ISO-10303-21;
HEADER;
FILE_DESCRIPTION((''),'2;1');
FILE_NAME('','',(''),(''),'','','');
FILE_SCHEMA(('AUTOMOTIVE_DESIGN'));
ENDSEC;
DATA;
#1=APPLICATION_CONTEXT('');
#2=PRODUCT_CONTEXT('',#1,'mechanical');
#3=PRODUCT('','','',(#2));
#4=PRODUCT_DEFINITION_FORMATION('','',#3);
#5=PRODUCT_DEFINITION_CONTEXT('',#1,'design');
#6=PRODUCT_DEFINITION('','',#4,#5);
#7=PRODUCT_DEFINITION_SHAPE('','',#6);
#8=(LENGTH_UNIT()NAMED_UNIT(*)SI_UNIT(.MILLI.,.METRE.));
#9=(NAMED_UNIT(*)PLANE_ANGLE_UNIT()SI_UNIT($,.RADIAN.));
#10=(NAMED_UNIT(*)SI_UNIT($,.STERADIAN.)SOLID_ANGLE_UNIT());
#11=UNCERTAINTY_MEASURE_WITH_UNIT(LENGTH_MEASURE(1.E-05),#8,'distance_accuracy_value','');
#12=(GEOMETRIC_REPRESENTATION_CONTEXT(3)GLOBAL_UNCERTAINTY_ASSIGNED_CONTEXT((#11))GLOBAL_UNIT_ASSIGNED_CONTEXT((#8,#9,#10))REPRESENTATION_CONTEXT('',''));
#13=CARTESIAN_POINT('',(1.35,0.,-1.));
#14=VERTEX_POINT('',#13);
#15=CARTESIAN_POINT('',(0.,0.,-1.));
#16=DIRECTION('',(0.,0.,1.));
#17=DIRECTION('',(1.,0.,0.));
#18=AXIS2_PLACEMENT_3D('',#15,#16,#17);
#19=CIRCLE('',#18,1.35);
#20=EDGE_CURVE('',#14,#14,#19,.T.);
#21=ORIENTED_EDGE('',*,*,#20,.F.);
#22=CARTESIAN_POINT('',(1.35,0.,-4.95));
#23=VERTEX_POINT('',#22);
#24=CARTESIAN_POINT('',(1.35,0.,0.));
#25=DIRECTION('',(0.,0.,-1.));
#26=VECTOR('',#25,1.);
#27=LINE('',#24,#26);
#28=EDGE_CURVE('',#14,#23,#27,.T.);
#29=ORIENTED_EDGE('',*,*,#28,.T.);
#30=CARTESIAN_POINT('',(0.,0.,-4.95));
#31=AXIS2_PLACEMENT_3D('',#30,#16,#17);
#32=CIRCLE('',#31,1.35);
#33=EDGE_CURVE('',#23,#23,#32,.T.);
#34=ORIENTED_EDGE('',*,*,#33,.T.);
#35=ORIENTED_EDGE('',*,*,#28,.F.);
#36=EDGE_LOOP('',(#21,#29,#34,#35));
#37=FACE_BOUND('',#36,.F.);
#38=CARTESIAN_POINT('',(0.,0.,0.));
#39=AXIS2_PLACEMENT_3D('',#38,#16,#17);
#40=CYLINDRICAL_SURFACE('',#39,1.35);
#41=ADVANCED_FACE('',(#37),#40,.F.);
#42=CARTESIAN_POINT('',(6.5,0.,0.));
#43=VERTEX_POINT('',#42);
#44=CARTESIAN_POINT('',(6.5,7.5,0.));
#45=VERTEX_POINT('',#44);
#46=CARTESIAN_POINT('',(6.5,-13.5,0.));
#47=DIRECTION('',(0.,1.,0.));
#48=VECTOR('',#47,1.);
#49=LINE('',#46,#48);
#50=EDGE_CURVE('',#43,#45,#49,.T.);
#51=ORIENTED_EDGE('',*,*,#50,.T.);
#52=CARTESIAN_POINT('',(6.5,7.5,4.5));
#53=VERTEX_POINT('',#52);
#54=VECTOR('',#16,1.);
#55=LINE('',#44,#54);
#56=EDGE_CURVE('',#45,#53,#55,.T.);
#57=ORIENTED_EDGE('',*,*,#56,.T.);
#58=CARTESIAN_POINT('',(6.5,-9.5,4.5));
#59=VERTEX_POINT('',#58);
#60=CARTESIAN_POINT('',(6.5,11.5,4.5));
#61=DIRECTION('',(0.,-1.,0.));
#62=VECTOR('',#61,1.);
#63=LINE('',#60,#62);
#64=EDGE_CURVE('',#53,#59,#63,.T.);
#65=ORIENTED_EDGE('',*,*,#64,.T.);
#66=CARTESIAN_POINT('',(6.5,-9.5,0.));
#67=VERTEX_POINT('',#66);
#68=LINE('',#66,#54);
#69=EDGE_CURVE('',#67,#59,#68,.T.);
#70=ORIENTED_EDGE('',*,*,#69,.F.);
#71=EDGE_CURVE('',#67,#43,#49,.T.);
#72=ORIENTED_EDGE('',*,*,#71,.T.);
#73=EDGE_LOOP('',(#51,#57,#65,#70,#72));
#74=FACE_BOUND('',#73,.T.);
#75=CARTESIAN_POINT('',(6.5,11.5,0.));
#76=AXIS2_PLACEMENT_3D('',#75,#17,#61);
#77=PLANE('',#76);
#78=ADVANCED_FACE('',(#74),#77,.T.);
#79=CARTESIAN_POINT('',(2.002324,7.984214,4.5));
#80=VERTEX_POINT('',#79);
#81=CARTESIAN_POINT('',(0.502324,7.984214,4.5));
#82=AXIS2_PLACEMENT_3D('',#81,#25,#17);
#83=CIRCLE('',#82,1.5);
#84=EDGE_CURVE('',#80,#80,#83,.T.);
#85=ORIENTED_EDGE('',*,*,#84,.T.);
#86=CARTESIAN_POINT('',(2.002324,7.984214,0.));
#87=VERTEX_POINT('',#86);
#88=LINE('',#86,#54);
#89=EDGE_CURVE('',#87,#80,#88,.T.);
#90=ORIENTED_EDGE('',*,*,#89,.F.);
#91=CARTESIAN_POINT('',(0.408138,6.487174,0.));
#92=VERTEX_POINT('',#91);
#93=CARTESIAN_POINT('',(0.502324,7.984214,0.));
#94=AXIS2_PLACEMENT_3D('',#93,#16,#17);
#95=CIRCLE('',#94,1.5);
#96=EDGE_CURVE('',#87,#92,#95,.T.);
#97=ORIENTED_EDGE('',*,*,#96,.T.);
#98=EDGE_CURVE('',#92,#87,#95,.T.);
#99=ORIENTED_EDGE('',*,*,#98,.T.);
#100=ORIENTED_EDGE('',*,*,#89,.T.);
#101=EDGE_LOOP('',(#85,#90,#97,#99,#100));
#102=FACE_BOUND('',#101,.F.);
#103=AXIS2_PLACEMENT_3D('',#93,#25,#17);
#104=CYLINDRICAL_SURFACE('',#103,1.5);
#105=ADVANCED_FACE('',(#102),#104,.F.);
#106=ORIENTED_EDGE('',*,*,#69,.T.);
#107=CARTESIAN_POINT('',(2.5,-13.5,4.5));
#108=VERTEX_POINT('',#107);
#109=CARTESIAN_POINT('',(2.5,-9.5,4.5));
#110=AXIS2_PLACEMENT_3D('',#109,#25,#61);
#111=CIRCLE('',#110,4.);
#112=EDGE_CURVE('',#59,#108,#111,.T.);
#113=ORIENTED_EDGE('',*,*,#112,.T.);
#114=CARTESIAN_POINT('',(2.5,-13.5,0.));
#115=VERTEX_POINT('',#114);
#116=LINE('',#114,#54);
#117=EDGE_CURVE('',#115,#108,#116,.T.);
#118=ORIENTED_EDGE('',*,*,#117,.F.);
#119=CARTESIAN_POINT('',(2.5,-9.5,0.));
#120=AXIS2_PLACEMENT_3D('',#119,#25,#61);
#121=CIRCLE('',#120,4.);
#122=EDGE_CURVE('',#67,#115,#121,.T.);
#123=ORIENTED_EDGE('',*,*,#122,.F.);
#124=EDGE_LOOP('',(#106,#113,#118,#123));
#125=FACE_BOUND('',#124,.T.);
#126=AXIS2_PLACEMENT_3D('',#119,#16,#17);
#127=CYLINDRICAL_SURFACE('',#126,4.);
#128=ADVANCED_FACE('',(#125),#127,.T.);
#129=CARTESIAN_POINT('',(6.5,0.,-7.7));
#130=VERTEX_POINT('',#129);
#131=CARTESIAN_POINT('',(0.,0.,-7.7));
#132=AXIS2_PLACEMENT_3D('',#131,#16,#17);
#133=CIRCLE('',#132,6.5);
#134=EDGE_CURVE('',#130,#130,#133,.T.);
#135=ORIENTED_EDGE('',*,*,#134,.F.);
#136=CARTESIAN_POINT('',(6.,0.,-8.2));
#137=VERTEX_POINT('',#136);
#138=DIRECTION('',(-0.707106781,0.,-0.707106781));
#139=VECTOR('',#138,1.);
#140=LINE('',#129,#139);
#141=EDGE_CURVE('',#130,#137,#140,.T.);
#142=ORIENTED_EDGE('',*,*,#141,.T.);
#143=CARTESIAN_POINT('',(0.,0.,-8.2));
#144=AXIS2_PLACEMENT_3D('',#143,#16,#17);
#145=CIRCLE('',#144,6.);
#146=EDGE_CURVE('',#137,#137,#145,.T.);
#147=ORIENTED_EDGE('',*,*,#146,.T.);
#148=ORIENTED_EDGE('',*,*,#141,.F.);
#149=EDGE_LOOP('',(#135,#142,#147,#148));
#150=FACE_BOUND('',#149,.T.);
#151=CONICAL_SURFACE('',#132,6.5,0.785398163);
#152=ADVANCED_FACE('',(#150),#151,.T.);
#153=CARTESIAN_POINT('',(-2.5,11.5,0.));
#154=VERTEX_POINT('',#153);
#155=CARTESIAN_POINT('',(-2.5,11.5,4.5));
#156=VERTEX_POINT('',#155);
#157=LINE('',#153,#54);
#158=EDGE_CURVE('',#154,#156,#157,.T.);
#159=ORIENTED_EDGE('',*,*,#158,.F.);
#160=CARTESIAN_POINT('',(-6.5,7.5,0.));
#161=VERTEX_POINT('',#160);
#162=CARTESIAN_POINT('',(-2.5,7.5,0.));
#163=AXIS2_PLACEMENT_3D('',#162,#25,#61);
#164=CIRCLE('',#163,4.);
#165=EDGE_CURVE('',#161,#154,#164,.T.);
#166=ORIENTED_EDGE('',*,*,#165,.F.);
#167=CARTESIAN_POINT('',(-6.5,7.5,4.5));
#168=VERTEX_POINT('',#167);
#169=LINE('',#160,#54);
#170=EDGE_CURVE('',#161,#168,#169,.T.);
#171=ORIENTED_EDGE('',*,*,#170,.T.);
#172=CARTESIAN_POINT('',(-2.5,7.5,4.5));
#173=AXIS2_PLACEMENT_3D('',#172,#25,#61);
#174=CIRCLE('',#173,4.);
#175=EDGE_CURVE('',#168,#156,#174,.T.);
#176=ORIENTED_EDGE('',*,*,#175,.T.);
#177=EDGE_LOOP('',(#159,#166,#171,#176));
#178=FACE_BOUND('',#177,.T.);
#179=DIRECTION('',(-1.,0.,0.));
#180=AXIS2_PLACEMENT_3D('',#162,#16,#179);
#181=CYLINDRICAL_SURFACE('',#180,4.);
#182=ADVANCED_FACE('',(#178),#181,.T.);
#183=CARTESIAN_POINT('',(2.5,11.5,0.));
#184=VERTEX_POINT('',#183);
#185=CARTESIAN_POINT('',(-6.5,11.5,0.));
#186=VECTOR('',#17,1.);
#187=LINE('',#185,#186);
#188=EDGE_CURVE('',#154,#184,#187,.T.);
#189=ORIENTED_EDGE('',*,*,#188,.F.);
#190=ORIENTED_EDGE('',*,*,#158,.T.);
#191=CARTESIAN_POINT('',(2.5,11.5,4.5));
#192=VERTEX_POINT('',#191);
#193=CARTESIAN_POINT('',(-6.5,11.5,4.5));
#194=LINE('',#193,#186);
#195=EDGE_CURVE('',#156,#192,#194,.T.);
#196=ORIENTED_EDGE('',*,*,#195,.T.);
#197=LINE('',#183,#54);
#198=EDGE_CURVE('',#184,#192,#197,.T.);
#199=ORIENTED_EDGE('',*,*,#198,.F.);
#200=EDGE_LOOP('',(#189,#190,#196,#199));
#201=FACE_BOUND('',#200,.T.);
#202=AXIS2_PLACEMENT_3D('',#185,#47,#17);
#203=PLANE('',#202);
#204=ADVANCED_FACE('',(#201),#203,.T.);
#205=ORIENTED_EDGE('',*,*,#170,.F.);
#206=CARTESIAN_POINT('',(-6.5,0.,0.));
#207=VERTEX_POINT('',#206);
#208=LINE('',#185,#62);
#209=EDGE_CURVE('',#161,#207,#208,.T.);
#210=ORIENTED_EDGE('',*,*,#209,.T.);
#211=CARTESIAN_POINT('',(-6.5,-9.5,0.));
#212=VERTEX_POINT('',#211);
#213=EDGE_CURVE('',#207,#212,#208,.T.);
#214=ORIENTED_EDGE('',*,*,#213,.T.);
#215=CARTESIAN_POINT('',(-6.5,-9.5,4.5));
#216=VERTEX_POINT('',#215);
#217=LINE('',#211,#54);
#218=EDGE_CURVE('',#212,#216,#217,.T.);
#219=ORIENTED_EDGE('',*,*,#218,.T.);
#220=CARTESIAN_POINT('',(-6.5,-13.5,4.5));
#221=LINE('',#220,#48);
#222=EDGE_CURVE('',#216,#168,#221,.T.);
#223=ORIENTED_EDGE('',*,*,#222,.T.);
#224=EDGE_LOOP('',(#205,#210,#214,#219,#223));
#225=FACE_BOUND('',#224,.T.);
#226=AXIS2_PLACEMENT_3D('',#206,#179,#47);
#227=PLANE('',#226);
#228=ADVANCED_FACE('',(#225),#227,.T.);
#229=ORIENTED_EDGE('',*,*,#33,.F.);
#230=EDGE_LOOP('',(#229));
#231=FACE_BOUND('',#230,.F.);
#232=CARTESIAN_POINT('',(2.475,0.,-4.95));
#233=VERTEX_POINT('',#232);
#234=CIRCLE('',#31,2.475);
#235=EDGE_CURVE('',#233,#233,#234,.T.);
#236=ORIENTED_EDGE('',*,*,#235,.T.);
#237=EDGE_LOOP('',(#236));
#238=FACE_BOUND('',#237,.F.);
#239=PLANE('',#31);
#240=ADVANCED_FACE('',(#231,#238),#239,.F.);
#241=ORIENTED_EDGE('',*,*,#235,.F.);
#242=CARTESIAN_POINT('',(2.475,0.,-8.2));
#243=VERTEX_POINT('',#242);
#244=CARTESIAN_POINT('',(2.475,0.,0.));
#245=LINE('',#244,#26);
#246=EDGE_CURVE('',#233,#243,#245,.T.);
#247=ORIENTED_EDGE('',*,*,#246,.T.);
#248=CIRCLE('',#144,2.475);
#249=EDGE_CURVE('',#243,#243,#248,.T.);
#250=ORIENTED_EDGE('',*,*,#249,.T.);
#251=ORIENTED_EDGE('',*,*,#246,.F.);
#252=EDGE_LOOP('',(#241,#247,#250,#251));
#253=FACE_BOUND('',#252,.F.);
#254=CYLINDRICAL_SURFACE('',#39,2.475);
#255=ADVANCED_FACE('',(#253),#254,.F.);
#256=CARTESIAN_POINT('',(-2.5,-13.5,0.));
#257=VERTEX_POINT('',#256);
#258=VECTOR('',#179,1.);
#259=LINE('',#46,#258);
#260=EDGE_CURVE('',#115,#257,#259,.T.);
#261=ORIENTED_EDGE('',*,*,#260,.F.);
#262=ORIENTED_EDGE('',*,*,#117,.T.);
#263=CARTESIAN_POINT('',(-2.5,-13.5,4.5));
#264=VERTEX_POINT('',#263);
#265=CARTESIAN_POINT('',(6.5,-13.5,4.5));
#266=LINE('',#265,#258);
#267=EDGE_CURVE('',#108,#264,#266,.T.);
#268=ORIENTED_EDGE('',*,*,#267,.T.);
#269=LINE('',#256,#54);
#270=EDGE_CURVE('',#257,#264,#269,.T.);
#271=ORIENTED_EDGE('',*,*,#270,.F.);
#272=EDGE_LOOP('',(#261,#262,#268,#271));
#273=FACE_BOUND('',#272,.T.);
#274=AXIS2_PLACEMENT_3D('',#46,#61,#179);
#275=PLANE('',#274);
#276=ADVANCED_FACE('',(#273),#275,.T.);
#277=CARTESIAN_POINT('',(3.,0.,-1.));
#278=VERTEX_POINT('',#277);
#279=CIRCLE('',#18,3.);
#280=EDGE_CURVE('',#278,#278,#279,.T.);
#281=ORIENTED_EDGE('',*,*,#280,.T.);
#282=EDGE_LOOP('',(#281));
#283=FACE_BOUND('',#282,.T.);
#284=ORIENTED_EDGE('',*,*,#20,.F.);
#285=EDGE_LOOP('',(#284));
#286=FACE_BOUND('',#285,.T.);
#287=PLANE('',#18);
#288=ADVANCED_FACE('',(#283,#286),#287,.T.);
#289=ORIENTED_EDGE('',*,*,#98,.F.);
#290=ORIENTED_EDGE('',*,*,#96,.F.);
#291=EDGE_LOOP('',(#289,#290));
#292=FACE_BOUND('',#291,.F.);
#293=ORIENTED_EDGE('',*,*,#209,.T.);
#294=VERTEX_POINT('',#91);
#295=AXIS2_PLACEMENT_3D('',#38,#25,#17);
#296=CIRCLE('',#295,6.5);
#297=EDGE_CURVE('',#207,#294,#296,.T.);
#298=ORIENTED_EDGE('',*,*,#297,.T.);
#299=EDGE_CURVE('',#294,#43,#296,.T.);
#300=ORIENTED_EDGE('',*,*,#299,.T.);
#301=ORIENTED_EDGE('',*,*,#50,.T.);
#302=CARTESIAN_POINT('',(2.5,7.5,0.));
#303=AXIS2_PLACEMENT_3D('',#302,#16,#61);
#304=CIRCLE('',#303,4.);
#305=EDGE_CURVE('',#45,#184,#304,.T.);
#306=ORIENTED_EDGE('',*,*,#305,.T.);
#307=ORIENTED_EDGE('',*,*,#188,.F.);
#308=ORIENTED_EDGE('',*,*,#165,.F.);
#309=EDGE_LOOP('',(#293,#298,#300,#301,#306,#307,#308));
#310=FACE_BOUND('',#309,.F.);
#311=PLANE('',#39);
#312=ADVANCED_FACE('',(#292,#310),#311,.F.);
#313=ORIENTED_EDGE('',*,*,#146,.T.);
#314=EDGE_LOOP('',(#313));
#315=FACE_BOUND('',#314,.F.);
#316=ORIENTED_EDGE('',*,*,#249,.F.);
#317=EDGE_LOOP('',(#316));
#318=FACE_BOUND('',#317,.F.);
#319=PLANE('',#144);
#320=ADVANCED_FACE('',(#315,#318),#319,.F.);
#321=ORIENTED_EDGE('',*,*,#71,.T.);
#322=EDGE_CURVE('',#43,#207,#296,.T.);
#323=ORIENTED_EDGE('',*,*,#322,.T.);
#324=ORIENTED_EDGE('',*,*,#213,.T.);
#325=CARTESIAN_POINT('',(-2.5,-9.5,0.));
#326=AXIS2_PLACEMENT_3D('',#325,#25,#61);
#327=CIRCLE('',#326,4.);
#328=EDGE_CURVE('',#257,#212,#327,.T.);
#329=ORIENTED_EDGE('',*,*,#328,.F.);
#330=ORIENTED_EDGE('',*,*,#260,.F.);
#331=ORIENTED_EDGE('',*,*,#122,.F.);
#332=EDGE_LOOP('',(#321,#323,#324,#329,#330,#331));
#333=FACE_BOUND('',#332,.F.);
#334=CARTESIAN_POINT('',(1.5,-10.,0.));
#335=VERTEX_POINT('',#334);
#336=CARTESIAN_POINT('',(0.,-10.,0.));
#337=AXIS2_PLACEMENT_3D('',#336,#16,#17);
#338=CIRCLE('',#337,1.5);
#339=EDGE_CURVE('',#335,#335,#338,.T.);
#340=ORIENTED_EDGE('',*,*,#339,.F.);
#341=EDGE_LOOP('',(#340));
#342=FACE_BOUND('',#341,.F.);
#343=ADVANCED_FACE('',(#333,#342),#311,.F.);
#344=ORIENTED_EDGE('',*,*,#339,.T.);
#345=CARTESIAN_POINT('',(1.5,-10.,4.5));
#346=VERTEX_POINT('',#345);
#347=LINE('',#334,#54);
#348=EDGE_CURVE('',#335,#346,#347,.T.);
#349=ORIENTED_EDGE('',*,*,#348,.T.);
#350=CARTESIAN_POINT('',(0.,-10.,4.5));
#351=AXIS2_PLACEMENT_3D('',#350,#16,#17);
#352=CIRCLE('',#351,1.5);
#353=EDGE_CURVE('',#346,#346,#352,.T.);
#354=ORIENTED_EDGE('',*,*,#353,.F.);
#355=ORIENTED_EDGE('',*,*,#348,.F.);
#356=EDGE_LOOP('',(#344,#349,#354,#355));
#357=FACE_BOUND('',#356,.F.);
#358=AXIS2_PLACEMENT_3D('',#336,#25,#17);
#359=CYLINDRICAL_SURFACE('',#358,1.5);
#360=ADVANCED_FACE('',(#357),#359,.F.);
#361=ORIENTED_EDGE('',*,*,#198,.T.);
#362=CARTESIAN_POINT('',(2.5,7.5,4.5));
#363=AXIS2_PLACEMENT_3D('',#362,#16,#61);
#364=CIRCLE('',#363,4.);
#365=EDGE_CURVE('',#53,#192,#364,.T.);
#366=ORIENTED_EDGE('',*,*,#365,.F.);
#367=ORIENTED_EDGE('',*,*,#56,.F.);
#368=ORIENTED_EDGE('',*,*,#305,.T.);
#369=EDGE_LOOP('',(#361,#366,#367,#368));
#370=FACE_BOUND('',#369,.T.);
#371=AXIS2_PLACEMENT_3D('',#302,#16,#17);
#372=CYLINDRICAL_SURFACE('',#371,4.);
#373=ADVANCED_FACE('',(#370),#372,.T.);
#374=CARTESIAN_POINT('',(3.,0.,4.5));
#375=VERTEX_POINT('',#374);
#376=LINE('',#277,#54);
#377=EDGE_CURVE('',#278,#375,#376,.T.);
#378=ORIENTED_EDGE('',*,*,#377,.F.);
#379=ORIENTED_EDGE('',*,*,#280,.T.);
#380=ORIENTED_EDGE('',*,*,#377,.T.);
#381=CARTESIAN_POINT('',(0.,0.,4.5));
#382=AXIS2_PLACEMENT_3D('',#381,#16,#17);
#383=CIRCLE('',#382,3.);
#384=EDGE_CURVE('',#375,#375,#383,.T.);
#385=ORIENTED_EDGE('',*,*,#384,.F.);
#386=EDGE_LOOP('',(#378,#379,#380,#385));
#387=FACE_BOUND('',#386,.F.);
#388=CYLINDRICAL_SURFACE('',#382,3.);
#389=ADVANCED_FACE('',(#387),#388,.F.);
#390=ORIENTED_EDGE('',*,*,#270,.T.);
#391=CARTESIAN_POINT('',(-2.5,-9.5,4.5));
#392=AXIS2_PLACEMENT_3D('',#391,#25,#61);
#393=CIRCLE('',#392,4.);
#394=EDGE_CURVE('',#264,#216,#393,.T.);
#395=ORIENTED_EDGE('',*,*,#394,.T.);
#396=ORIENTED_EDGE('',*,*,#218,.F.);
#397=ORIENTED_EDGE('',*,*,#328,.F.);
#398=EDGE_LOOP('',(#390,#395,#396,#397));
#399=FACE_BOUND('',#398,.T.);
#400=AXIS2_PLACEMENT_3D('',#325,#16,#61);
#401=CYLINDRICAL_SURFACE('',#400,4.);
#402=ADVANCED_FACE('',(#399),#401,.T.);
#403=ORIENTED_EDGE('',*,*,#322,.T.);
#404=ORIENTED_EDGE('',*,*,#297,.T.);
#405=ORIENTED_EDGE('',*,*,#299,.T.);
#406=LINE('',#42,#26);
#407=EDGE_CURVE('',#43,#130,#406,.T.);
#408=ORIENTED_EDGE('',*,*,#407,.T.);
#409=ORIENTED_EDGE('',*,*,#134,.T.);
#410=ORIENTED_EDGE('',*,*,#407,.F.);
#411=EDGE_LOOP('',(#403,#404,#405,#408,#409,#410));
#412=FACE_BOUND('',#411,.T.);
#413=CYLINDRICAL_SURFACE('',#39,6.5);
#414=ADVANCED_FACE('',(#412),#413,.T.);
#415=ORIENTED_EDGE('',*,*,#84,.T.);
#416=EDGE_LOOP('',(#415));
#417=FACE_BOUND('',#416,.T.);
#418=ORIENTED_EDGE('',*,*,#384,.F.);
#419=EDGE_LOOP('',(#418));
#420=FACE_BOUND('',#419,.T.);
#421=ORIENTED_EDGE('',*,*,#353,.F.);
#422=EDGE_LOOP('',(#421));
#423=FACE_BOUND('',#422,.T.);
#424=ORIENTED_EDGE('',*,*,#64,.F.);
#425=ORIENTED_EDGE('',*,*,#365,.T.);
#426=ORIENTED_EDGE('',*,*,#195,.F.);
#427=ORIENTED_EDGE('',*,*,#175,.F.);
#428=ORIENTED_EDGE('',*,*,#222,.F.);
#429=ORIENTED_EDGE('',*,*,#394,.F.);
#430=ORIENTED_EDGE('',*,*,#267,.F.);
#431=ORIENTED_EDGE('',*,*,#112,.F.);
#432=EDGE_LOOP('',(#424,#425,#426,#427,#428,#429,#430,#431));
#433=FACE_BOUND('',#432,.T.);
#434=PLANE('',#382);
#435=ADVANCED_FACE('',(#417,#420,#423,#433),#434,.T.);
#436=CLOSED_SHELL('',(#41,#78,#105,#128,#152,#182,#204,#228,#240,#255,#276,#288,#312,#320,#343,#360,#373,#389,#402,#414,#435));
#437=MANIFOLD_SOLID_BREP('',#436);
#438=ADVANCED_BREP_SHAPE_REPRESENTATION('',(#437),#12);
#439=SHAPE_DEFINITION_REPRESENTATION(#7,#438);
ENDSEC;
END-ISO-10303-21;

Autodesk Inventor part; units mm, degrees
ref_plane "YZ Plane" through (0, 0, 0) normal (1, 0, 0) x (0, 1, 0)
ref_plane "XZ Plane" through (0, 0, 0) normal (0, 1, 0) x (-1, 0, 0)
ref_plane "XY Plane" through (0, 0, 0) normal (0, 0, 1) x (1, 0, 0)
sketch "Skizze1" plane through (0, 0, 0) normal (0, 0, 1) x (1, 0, 0)
  line L0 (-6.5, 13.5) -> (6.5, 13.5)
  line L1 (6.5, 13.5) -> (6.5, -13.5)
  line L2 (6.5, -13.5) -> (-6.5, -13.5)
  line L3 (-6.5, -13.5) -> (-6.5, 13.5)
  line L4 (-6.5, 13.5) -> (6.5, -13.5) construction
  line L5 (6.5, 13.5) -> (-6.5, -13.5) construction
  line L6 (0, 0) -> (0.502324, 7.984214) construction
  line L7 (0, 0) -> (0, -13.5) construction
  circle A0 centre (0, -10) radius 1.5
  circle A1 centre (0.502324, 7.984214) radius 1.5
  line L8 (-6.5, 11.5) -> (6.5, 11.5)
  circle A2 centre (0, 0) radius 6.5
  circle A3 centre (0, 0) radius 2.475
  circle A4 centre (0, 0) radius 1.35
  circle A5 centre (0, 0) radius 3
  dimension "d13" = 3
  dimension "d14" = 3
  dimension "d15" = 3.5
  dimension "d16" = 10
  dimension "d17" = 8
  dimension "d18" = 3.6
  dimension "d23" = 4.95
  dimension "d26" = 2.7
  dimension "d29" = 6
  dimension "d37" = 13
  dimension "d39" = 25
extrude "Extrusion1" add sketch "Skizze1" along normal blind 4.5 contours L8 L1 A2 L3 | A2 L1 L2 L3 | A2 | A3 | A4 | A5
extrude "Extrusion2" add sketch "Skizze1" against normal blind 8.2 contours A2 | A5
extrude "Extrusion3" cut sketch "Skizze1" along normal through all contours A4
extrude "Extrusion4" cut sketch "Skizze1" against normal blind 7 from surface at 4.5 contours A3 | A4 | A5
chamfer "Fase1" distance 0.5 angle 45 1 edges at (-6.5, 0, -8.2)
fillet "Rundung1" radius 4 4 edges at (6.5, 11.5, 2.25) (-6.5, 11.5, 2.25) (6.5, -13.5, 2.25) (-6.5, -13.5, 2.25)
extrude "Extrusion6" add sketch "Skizze1" against normal blind 4.95 contours A3 | A5
extrude "Extrusion7" cut sketch "Skizze1" against normal blind 1 contours A3 | A5
equation "\"d14\" = d13"
properties part number "daVinci_Tool_Clutch"
